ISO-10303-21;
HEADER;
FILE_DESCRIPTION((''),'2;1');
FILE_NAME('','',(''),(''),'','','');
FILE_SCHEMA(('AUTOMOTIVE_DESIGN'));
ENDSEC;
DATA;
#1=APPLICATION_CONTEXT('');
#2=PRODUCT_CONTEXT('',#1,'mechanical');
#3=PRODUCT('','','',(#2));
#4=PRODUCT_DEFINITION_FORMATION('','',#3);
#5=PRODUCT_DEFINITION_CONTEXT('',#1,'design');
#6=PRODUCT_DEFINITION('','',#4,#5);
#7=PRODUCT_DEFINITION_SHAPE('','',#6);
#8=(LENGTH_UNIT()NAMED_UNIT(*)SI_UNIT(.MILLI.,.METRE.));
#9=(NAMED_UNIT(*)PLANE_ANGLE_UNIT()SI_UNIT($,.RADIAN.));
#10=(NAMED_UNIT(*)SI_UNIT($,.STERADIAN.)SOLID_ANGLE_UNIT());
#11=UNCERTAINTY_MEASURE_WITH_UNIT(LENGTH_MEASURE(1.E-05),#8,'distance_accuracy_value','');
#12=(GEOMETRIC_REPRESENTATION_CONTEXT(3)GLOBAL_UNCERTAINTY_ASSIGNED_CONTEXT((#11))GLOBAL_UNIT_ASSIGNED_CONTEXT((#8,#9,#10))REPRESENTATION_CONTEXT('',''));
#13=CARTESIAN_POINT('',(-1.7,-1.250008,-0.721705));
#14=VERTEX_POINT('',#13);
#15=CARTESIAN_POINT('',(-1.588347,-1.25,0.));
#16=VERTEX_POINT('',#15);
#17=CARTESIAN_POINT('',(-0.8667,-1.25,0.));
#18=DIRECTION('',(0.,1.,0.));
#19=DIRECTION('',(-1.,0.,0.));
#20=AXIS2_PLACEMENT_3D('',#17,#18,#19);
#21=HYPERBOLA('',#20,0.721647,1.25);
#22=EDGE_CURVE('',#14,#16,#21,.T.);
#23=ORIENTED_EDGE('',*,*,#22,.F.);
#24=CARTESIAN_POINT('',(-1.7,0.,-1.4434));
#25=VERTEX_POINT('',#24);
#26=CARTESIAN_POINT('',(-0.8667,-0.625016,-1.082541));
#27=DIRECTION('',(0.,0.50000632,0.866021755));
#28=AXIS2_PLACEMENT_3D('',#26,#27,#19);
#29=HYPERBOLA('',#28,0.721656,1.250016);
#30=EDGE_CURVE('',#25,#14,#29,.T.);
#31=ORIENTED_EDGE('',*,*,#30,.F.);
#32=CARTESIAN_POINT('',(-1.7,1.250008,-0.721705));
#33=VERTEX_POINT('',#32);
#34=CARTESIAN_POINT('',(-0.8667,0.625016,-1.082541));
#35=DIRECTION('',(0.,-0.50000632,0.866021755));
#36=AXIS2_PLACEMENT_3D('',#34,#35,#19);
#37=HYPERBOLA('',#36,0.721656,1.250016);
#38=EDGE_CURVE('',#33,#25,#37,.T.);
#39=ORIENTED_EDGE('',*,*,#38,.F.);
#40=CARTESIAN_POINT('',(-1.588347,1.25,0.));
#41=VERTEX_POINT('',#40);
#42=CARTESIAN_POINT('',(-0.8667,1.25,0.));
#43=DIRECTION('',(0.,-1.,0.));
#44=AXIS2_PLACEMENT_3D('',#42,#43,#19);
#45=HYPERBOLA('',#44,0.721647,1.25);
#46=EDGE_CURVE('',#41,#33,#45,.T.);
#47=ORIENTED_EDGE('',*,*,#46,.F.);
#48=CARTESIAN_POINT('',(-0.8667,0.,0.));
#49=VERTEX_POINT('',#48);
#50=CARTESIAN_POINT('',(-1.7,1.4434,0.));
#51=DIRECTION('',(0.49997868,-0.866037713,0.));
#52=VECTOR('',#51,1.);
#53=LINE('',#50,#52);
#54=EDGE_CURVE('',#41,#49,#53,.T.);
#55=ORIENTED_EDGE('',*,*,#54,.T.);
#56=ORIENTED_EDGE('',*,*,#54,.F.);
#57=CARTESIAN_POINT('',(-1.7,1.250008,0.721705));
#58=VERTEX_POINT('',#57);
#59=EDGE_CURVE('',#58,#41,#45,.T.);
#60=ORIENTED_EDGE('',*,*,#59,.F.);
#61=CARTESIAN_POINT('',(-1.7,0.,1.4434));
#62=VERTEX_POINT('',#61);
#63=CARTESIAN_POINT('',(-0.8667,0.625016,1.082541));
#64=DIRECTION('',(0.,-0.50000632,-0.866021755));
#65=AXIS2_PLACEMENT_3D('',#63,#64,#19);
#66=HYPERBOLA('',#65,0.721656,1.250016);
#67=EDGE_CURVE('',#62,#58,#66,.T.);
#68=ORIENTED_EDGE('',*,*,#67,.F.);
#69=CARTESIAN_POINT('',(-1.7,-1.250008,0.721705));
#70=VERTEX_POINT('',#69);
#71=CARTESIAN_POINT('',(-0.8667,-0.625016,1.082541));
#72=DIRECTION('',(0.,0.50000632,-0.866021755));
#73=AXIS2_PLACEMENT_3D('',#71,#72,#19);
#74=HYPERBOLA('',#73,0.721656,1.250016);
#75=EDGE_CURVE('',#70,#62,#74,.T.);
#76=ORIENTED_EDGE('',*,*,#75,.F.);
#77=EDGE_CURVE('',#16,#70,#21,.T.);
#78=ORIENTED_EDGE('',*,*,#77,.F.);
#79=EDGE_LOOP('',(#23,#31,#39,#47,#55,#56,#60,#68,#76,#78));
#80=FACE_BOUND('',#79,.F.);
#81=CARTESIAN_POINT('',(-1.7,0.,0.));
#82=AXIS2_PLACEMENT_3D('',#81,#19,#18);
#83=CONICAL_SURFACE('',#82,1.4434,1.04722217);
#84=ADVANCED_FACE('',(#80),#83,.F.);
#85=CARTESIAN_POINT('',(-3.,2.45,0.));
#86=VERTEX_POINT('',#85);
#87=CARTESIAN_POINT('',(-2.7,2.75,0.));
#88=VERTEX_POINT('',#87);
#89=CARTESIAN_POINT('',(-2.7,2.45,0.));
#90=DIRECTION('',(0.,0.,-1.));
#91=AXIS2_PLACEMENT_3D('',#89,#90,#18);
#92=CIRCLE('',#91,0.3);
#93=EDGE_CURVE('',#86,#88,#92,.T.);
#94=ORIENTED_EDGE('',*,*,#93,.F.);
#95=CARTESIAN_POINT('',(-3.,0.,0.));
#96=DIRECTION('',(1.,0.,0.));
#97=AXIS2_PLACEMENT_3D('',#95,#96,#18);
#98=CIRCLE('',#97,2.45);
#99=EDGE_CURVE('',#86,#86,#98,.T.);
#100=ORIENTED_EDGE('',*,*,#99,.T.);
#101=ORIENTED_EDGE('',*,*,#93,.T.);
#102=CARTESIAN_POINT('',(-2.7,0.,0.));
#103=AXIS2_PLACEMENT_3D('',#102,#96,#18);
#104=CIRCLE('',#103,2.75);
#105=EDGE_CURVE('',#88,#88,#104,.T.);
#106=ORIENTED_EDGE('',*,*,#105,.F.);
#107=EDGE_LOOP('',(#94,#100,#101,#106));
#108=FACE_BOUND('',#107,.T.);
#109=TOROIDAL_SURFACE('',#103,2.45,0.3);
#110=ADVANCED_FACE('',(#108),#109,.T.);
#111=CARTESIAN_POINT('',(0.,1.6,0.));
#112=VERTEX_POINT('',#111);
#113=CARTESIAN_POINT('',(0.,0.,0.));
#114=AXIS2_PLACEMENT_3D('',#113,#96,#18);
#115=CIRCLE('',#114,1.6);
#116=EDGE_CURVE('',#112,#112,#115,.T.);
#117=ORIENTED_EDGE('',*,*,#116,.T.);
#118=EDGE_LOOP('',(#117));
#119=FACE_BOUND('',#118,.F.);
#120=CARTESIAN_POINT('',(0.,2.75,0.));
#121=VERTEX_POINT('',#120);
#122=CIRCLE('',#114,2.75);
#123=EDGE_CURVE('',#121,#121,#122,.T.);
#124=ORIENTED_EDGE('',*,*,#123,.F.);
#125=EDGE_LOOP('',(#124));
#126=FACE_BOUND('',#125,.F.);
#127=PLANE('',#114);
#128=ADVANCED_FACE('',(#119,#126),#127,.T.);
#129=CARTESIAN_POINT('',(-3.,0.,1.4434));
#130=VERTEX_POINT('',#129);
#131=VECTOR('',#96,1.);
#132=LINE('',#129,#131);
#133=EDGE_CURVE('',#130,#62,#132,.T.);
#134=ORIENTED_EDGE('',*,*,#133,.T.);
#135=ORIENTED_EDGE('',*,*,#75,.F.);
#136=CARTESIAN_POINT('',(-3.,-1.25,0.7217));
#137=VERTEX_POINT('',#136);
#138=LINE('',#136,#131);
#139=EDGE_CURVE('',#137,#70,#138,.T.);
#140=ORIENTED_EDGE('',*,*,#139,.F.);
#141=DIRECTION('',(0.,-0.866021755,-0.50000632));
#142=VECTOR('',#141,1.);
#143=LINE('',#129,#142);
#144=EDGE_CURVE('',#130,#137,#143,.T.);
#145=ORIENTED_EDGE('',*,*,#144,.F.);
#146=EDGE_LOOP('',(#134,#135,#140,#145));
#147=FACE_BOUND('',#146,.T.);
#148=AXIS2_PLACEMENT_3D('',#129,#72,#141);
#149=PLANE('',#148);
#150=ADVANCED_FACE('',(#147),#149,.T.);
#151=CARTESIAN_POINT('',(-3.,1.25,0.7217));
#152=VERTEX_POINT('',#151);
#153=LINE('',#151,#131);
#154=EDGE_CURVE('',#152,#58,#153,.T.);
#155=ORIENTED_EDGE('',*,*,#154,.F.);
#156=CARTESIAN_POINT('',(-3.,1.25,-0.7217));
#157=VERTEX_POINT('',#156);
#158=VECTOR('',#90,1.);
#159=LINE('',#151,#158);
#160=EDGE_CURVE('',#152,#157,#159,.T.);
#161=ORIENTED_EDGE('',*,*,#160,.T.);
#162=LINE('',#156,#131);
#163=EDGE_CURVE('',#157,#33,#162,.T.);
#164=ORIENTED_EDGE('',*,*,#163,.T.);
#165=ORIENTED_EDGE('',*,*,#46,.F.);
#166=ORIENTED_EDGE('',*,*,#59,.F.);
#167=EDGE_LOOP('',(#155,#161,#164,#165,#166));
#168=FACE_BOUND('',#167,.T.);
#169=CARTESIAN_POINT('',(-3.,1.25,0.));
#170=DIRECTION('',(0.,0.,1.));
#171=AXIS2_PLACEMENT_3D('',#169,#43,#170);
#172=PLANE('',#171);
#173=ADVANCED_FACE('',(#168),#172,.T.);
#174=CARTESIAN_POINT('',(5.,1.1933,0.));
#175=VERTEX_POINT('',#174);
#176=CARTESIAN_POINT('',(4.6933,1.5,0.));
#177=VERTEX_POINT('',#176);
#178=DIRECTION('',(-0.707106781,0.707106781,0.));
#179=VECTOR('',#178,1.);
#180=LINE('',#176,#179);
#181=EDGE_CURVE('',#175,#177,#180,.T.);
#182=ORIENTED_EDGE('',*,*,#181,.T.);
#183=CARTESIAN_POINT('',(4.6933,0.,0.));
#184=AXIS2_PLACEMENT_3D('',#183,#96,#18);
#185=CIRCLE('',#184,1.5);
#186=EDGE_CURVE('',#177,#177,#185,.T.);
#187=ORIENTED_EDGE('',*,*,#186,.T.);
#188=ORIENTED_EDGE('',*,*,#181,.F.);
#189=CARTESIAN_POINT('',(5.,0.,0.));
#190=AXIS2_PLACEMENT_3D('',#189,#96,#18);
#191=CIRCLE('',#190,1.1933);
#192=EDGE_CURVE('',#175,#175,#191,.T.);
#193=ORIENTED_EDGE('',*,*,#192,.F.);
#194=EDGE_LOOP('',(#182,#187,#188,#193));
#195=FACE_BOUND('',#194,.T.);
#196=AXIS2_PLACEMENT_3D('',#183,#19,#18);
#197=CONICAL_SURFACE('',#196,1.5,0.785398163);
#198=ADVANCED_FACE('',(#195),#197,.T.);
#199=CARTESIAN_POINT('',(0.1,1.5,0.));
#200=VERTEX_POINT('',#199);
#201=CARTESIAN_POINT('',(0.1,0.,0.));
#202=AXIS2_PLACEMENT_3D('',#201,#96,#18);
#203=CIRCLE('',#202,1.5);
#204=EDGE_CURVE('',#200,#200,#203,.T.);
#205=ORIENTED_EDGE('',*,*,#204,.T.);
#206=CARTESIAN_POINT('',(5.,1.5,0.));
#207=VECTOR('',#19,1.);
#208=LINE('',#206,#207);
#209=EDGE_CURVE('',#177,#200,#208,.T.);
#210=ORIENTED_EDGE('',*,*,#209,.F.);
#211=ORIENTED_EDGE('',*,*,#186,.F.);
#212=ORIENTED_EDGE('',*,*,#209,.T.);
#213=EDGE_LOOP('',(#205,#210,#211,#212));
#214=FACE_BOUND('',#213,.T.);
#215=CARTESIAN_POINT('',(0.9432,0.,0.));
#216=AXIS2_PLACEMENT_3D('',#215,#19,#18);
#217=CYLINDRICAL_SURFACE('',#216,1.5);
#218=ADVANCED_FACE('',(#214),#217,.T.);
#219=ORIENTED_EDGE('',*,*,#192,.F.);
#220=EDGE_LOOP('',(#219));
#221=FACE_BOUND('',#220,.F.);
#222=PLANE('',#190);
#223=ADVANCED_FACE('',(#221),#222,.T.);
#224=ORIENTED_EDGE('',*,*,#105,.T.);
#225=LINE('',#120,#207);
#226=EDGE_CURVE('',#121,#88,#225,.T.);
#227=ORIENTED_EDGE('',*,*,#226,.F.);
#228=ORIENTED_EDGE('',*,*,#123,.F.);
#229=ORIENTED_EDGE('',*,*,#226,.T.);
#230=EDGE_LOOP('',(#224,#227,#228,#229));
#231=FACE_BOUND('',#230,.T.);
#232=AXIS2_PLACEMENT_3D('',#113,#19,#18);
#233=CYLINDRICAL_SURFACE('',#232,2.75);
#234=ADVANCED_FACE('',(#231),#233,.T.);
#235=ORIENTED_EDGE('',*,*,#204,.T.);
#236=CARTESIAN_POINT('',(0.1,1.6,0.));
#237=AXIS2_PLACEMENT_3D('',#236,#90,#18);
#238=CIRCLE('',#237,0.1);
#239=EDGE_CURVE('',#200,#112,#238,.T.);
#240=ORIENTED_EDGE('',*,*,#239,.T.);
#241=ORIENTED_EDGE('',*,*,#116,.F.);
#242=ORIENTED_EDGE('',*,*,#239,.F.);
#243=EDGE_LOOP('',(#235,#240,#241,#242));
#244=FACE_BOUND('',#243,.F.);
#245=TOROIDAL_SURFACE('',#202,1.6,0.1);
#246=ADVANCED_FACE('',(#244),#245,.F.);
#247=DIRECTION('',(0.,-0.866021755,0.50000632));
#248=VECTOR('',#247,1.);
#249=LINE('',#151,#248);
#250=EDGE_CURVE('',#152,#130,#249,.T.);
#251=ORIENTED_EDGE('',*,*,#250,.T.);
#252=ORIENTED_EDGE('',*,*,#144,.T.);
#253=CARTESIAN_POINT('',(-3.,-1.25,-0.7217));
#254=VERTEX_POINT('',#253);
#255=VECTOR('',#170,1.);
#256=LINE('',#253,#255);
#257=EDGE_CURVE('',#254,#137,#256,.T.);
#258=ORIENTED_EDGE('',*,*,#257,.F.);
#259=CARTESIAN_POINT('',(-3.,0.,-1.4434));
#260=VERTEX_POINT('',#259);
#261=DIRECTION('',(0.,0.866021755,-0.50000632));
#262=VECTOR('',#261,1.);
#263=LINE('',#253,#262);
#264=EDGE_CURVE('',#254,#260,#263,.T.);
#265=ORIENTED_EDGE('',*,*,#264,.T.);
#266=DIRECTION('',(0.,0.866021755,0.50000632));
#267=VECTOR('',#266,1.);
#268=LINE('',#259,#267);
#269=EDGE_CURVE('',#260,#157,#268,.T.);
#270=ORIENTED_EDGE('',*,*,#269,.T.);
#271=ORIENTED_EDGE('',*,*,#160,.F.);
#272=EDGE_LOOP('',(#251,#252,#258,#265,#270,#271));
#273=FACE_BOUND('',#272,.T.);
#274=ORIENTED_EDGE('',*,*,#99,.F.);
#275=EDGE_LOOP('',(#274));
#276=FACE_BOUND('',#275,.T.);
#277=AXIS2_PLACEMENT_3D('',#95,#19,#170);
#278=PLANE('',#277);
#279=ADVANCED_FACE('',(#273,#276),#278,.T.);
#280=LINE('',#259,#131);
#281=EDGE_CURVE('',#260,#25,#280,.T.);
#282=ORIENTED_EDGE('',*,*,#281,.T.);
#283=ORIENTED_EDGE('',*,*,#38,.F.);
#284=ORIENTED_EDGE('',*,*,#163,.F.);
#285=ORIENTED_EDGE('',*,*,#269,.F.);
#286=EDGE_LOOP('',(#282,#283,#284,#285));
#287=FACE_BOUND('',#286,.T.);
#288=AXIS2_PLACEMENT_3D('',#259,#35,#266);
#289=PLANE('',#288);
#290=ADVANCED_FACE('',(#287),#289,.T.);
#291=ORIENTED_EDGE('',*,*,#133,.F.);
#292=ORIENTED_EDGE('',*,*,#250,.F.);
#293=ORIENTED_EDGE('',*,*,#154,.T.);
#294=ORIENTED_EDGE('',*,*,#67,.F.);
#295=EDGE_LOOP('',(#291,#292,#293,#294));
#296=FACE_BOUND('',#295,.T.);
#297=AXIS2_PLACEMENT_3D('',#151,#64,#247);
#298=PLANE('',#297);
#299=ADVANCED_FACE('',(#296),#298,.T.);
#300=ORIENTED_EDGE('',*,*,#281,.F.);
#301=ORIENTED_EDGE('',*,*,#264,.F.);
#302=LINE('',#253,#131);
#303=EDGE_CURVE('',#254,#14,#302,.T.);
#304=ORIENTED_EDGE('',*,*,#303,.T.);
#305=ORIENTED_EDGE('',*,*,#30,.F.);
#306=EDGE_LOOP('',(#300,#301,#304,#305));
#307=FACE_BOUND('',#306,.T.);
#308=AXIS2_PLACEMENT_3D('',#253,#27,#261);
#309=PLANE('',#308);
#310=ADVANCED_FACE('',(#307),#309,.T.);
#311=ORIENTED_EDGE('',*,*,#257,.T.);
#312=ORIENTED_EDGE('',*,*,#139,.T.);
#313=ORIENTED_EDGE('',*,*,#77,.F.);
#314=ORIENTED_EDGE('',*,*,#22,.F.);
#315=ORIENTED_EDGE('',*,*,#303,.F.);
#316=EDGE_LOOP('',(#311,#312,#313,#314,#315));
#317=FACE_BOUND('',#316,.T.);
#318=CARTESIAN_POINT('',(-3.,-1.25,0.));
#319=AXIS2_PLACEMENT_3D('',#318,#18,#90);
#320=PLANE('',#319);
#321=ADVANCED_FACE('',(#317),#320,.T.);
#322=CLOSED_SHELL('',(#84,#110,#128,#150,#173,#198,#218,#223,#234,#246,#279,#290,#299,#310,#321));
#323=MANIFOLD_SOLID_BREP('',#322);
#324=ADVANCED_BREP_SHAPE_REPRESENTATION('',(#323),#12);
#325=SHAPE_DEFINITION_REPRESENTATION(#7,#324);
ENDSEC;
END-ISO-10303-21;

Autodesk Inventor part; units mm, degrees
ref_plane "YZ Plane" through (0, 0, 0) normal (1, 0, 0) x (0, 1, 0)
ref_plane "XZ Plane" through (0, 0, 0) normal (0, 1, 0) x (-1, 0, 0)
sketch "스케치1" plane through (0, 0, 0) normal (0, 0, 1) x (1, 0, 0)
  line L0 (-0.8667, 0) -> (5, 0)
  line L1 (5, 0) -> (5, 1.5)
  line L2 (5, 1.5) -> (1.25, 1.5)
  line L3 (1.25, 1.5) -> (0.9432, 1.5)
  line L4 (0.9432, 1.5) -> (0, 1.5)
  line L5 (0, 1.5) -> (0, 2.75)
  line L6 (0, 2.75) -> (-3, 2.75)
  line L7 (-3, 2.75) -> (-3, 1.4434)
  line L8 (-3, 1.4434) -> (-1.7, 1.4434)
  line L9 (-1.7, 1.4434) -> (-0.8667, 0)
  line L10 (-4.6, 0) -> (6.6, 0) projected
  line L11 (0, -0.55) -> (0, 3.3) projected
  line L12 (1.25, 1.5) -> (0, 1.5) construction
  dimension "d1" = 3.75
  dimension "d2" = 0.3068
  dimension "d3" = 3
  dimension "d4" = 1.3
  dimension "d5" = 60
  dimension "d6" = 3
  dimension "d7" = 3
  dimension "d8" = 2.8868
  dimension "d9" = 5.5
  dimension "d26" = 5
revolve "본체" add sketch "스케치1" angle 360 about axis through (-0.8667, 0, 0) along (1, 0, 0)
sketch "스케치2" plane through (-3, 0, 0) normal (-1, 0, 0) x (0, 0, 1)
  circle A0 centre (0, 0) radius 1.4434 projected
  line L0 (0, -3.85) -> (0, 3.85) projected
  line L1 (-3.85, 0) -> (3.85, 0) projected
  line L2 (1.4434, 0) -> (0.7217, -1.25)
  line L3 (0.7217, -1.25) -> (-0.7217, -1.25)
  line L4 (-0.7217, -1.25) -> (-1.4434, 0)
  line L5 (-1.4434, 0) -> (-0.7217, 1.25)
  line L6 (-0.7217, 1.25) -> (0.7217, 1.25)
  line L7 (0.7217, 1.25) -> (1.4434, 0)
extrude "슬롯" add sketch "스케치2" against normal up to next contours L7 A0 | A0 L2 | L6 L0 A0 | A0 L0 L3 | L0 L6 A0 | A0 L3 L0 | L4 A0 | A0 L5
fillet "모깎기1" radius 0.3 1 edges at (-3, -2.75, 0)
thread "스레드" size "M3x0.5" class "6g" standard "ISO Metric profile" length 3.75
chamfer "모따기1" distance 0.3067 distance2 0.3067 1 edges at (5, -1.5, 0) measured on face at (5, -0.2617, -0.7882)
ref_plane "Work Plane1" through (29, 0, 0) normal (0, -1, 0) x (1, 0, 0)
fillet "Fillet2" radius 0.1 1 edges at (0, -1.5, 0)
equation "\"d1\" = GEL"
equation "\"d3\" = KOH"
equation "\"d4\" = INTI"
equation "\"d6\" = GD"
equation "\"d7\" = BDM"
equation "\"d8\" = 1.1547 * SW"
equation "\"d9\" = KOD"
equation "\"d26\" = NLG"
equation "\"d30\" = R"
equation "\"d17\" = RR"
equation "\"d13\" = GEL"
equation "\"d15\" = -0.5 * SPD + 0.5 * GD"
equation "\"d16\" = GUL"
equation "\"GD\" = NND"
equation "\"NLG\" = 5"
equation "\"GEL\" = 3.75"
equation "\"KOD\" = 5.5"
equation "\"KOH\" = NND"
equation "\"INTI\" = 1.3"
equation "\"GAL\" = 0.61345 * PTC"
equation "\"GUL\" = 0.61345 * PTC"
equation "\"BDM\" = NND"
equation "\"SW\" = 2.5"
equation "\"RR\" = 0.1 * NND"
equation "\"SPD\" = NND - 1.2269 * PTC"
equation "\"R\" = 0.1"
equation "\"TOA\" = 30deg"
equation "\"GD1\" = THREADDIA - 1.2269 * PTC"
equation "\"THREADDIA\" = NND"
equation "\"FAWI\" = 45deg"
equation "\"PTC\" = 0.5"
equation "\"NND\" = 3"
equation "\"E0\" = 1.155 * SW"
properties part number "BS EN ISO 4762 - M3 x 5" material "강철, 연강"
